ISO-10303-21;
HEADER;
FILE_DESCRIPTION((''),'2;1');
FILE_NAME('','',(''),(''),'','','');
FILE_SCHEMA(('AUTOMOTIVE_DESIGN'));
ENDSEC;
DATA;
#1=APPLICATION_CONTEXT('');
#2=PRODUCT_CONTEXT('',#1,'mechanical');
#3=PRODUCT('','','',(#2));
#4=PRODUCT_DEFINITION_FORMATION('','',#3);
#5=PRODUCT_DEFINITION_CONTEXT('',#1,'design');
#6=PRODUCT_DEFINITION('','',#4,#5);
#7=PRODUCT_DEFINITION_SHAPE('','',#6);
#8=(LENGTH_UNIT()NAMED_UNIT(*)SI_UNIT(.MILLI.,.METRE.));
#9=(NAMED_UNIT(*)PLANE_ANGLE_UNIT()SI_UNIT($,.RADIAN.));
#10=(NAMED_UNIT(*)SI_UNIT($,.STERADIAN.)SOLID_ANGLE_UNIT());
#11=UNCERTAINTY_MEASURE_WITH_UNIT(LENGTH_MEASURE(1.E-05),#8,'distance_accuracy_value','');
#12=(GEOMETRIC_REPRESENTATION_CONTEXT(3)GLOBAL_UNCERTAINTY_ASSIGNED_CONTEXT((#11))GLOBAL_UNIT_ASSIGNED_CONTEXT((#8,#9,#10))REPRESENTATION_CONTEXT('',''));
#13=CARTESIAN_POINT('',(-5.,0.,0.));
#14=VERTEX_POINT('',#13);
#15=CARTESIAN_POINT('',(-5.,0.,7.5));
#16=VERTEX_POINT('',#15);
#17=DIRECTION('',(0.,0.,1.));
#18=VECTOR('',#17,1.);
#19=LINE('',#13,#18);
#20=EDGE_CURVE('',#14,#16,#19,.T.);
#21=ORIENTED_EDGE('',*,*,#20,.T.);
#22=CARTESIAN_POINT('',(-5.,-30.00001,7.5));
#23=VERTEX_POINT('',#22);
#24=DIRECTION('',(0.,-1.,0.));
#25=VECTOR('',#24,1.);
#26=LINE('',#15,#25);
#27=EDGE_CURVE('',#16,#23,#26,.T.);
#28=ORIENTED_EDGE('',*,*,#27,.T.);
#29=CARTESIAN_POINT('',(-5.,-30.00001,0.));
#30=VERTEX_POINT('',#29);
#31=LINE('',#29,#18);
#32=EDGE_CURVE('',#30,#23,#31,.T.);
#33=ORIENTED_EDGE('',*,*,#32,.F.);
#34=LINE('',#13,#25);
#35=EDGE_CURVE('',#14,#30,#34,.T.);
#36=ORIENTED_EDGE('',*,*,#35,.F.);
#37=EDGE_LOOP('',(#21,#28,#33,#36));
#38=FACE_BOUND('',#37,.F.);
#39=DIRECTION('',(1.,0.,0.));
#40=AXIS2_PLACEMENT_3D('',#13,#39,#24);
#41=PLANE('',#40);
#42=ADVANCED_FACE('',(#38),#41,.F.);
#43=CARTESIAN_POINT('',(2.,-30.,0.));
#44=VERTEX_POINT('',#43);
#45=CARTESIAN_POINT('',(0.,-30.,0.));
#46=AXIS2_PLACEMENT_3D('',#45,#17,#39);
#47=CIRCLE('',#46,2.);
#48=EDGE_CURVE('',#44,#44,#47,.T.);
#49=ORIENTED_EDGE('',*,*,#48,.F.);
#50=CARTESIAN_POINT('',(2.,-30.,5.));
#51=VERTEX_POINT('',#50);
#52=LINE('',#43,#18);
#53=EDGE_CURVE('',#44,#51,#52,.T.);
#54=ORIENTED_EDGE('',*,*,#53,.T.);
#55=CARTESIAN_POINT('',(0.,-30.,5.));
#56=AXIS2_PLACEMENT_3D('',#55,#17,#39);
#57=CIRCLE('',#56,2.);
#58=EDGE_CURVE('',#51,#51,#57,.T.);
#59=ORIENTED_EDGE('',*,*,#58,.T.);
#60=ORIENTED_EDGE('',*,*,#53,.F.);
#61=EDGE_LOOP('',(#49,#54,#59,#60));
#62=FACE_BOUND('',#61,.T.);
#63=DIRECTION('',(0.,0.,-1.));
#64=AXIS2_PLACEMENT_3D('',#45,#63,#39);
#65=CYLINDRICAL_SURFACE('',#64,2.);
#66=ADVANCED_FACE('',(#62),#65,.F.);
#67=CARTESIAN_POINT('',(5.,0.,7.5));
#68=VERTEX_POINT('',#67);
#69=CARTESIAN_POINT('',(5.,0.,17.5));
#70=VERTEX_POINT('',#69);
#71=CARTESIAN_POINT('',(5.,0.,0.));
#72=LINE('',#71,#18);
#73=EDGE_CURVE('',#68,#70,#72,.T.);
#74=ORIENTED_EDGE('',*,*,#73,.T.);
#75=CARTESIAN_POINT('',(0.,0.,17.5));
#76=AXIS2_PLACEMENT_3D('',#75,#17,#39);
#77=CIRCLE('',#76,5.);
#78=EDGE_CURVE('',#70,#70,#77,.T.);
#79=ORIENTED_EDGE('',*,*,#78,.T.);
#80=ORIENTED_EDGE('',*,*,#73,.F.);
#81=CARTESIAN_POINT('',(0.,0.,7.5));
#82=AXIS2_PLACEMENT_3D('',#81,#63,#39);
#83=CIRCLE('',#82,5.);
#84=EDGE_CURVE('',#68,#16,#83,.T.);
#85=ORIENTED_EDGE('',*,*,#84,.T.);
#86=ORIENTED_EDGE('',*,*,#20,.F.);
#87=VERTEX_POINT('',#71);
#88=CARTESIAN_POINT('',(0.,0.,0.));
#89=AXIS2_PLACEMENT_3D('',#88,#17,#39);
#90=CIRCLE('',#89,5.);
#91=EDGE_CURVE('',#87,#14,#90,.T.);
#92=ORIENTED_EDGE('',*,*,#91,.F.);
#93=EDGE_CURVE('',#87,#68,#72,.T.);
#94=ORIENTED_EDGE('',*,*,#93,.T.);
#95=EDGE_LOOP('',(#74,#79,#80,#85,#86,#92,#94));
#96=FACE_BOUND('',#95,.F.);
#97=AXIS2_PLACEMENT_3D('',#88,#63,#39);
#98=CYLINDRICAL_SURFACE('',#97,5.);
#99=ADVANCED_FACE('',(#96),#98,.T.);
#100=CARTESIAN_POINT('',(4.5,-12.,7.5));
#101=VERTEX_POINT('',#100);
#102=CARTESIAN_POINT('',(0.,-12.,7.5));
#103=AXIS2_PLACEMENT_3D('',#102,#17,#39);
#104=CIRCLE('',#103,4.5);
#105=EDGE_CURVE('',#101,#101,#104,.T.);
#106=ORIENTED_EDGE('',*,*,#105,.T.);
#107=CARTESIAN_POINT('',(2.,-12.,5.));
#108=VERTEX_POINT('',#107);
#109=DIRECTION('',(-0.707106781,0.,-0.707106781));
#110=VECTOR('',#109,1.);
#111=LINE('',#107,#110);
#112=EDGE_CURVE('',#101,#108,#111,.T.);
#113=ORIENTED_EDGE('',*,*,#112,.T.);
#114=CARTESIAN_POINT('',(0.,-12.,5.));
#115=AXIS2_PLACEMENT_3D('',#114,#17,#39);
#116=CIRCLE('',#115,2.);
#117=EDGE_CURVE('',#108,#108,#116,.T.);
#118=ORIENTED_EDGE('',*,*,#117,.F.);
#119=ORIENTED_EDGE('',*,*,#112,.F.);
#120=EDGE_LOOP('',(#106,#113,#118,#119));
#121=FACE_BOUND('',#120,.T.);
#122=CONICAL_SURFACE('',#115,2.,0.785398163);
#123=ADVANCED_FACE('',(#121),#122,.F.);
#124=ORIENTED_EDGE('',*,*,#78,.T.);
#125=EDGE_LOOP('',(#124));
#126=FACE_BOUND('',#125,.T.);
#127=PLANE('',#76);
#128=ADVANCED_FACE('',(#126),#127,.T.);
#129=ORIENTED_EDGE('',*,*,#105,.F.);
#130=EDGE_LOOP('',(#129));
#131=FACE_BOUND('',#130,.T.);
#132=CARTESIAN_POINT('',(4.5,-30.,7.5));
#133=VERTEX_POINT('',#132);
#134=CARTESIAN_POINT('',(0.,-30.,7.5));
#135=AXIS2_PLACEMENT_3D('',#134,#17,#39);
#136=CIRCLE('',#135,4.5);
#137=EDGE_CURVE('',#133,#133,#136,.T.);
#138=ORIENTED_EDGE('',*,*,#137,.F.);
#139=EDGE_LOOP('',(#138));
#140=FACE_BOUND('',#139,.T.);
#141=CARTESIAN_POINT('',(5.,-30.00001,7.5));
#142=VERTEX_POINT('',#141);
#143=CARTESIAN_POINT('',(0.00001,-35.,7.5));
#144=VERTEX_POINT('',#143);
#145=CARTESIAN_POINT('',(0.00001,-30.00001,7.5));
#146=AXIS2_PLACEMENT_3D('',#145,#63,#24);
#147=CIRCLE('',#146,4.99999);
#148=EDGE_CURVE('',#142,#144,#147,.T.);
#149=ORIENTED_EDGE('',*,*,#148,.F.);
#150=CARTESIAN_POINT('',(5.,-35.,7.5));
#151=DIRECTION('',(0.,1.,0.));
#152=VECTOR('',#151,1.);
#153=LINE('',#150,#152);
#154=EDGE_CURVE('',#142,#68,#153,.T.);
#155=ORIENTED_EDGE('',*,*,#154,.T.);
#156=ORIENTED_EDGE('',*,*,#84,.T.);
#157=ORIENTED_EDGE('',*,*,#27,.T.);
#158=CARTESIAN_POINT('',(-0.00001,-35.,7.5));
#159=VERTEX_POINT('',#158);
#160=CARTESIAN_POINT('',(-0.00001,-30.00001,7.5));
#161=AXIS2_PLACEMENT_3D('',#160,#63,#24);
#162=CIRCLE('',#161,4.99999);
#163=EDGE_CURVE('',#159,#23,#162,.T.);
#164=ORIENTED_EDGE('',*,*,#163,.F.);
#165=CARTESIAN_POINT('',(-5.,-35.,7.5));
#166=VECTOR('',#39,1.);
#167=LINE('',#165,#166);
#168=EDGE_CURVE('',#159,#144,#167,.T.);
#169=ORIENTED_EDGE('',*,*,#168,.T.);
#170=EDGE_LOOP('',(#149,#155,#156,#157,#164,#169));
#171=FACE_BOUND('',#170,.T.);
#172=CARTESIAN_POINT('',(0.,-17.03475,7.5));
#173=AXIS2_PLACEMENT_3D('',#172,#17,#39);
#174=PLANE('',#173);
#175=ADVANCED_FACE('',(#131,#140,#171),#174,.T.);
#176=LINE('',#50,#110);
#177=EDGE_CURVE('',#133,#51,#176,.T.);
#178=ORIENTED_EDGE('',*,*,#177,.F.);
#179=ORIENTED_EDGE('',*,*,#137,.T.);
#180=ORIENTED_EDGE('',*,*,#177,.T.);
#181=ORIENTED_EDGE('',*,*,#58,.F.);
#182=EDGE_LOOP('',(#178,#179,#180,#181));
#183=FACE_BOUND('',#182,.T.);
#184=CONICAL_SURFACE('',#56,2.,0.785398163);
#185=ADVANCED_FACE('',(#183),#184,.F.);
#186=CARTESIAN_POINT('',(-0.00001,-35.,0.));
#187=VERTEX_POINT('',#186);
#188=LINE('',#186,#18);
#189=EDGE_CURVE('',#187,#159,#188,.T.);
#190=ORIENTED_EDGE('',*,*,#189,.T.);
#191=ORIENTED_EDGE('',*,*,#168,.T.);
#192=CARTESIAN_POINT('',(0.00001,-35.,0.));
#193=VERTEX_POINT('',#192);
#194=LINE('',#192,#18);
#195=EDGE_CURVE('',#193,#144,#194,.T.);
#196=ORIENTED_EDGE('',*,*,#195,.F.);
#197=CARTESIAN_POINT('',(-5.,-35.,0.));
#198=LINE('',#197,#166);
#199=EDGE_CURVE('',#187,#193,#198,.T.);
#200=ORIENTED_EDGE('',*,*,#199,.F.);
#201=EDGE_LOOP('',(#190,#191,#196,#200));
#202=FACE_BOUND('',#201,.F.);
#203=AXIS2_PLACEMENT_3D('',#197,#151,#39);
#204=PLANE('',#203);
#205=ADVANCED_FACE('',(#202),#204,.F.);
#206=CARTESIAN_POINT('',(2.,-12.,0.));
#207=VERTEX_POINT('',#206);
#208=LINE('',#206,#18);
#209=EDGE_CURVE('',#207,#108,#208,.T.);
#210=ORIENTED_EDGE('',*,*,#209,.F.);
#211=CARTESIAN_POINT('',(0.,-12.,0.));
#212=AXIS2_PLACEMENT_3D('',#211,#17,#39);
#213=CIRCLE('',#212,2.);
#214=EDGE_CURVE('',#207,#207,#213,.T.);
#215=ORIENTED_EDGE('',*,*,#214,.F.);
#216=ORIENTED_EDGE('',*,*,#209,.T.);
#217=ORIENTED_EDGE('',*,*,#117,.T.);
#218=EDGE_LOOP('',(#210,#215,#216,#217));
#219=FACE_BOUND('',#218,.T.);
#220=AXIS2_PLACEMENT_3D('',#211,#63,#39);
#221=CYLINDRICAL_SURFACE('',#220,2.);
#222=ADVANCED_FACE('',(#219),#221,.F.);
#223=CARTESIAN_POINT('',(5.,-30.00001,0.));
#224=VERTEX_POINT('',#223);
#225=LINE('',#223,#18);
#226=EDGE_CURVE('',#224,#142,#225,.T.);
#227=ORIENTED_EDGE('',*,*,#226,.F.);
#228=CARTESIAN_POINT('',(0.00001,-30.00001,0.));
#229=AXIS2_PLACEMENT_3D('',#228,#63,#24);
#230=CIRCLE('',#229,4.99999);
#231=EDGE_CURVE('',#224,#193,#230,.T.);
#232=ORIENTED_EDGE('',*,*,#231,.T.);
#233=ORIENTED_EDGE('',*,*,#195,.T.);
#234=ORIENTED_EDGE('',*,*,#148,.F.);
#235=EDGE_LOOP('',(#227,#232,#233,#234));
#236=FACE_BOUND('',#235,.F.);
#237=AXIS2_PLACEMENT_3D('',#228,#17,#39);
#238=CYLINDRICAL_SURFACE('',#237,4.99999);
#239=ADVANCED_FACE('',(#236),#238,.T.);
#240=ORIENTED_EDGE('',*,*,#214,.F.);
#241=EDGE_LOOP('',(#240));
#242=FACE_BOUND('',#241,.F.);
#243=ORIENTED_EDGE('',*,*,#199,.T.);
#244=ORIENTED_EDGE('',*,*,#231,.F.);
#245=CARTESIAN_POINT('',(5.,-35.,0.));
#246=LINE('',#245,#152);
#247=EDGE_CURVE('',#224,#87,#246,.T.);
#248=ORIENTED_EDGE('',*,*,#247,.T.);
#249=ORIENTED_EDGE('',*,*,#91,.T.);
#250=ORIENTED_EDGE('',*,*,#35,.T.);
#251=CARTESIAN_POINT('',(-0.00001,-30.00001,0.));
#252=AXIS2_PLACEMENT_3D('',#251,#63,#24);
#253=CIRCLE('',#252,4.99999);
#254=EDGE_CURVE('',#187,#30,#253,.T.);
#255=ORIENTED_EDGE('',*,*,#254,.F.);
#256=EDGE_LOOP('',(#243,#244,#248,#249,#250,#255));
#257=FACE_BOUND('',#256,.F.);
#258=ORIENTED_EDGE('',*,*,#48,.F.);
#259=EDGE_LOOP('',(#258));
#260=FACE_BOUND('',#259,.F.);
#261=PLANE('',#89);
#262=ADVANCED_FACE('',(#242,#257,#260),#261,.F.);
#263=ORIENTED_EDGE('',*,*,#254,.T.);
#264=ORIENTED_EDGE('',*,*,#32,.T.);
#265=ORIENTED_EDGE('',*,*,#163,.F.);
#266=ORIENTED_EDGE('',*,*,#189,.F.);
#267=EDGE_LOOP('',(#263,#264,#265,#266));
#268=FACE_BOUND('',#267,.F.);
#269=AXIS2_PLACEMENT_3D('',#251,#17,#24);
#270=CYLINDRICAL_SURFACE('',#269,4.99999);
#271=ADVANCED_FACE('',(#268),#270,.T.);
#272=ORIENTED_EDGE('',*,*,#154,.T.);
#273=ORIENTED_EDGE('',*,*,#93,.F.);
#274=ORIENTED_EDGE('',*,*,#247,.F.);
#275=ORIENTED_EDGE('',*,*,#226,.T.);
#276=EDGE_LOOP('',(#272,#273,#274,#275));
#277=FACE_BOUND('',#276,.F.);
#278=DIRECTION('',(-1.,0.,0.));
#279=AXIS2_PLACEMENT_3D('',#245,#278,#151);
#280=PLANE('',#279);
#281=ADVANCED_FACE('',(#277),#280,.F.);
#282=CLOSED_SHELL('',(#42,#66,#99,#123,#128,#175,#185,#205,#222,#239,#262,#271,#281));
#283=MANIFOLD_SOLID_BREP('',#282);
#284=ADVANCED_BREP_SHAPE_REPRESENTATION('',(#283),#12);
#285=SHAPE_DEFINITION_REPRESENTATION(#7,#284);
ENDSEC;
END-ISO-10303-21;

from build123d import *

# Parameters (mm, degrees)
F0_R     = 2
F1_DEPTH = 7.5
F2_DEPTH = 17.5
F3_SIZE2 = 2.5
F3_SIZE  = 2.5
F4_R     = 4.99999


# Not quite as in the source:
# - a fillet or chamfer is up to 0.001 mm smaller than in the source, because OpenCascade refuses the exact size


with BuildPart() as f1:
    # F0 (on Top) → F1 (new body)
    with BuildSketch(Plane.XY):
        with BuildLine():
            Line((5, -35), (5, 0))
            ThreePointArc((5, 0), (0, -5), (-5, 0))
            Line((-5, 0), (-5, -35))
            Line((-5, -35), (0, -35))
            Line((0, -35), (5, -35))
        make_face()
        with Locations((0, -30)):
            Circle(F0_R, mode=Mode.SUBTRACT)
        with Locations((0, -12)):
            Circle(F0_R, mode=Mode.SUBTRACT)
    extrude(amount=F1_DEPTH)

    # F0 (on Top) → F2 (join)
    with BuildSketch(Plane.XY):
        with BuildLine():
            ThreePointArc((-5, 0), (0, -5), (5, 0))
            ThreePointArc((5, 0), (0, 5), (-5, 0))
        make_face()
    extrude(amount=F2_DEPTH)

    # F3
    f3_edges = [f1.edges().sort_by_distance(p)[0] for p in [
        (-2, -12, 7.5),
        (-2, -30, 7.5),
    ]]
    chamfer(f3_edges, length=F3_SIZE, length2=F3_SIZE2)

    # F4 (radius 5 in the source; OpenCascade refuses exactly that, so slightly less here)
    f4_edges = [f1.edges().sort_by_distance(p)[0] for p in [
        (-5, -35, 3.75),
        (5, -35, 3.75),
    ]]
    fillet(f4_edges, radius=F4_R)


solid = f1.part
